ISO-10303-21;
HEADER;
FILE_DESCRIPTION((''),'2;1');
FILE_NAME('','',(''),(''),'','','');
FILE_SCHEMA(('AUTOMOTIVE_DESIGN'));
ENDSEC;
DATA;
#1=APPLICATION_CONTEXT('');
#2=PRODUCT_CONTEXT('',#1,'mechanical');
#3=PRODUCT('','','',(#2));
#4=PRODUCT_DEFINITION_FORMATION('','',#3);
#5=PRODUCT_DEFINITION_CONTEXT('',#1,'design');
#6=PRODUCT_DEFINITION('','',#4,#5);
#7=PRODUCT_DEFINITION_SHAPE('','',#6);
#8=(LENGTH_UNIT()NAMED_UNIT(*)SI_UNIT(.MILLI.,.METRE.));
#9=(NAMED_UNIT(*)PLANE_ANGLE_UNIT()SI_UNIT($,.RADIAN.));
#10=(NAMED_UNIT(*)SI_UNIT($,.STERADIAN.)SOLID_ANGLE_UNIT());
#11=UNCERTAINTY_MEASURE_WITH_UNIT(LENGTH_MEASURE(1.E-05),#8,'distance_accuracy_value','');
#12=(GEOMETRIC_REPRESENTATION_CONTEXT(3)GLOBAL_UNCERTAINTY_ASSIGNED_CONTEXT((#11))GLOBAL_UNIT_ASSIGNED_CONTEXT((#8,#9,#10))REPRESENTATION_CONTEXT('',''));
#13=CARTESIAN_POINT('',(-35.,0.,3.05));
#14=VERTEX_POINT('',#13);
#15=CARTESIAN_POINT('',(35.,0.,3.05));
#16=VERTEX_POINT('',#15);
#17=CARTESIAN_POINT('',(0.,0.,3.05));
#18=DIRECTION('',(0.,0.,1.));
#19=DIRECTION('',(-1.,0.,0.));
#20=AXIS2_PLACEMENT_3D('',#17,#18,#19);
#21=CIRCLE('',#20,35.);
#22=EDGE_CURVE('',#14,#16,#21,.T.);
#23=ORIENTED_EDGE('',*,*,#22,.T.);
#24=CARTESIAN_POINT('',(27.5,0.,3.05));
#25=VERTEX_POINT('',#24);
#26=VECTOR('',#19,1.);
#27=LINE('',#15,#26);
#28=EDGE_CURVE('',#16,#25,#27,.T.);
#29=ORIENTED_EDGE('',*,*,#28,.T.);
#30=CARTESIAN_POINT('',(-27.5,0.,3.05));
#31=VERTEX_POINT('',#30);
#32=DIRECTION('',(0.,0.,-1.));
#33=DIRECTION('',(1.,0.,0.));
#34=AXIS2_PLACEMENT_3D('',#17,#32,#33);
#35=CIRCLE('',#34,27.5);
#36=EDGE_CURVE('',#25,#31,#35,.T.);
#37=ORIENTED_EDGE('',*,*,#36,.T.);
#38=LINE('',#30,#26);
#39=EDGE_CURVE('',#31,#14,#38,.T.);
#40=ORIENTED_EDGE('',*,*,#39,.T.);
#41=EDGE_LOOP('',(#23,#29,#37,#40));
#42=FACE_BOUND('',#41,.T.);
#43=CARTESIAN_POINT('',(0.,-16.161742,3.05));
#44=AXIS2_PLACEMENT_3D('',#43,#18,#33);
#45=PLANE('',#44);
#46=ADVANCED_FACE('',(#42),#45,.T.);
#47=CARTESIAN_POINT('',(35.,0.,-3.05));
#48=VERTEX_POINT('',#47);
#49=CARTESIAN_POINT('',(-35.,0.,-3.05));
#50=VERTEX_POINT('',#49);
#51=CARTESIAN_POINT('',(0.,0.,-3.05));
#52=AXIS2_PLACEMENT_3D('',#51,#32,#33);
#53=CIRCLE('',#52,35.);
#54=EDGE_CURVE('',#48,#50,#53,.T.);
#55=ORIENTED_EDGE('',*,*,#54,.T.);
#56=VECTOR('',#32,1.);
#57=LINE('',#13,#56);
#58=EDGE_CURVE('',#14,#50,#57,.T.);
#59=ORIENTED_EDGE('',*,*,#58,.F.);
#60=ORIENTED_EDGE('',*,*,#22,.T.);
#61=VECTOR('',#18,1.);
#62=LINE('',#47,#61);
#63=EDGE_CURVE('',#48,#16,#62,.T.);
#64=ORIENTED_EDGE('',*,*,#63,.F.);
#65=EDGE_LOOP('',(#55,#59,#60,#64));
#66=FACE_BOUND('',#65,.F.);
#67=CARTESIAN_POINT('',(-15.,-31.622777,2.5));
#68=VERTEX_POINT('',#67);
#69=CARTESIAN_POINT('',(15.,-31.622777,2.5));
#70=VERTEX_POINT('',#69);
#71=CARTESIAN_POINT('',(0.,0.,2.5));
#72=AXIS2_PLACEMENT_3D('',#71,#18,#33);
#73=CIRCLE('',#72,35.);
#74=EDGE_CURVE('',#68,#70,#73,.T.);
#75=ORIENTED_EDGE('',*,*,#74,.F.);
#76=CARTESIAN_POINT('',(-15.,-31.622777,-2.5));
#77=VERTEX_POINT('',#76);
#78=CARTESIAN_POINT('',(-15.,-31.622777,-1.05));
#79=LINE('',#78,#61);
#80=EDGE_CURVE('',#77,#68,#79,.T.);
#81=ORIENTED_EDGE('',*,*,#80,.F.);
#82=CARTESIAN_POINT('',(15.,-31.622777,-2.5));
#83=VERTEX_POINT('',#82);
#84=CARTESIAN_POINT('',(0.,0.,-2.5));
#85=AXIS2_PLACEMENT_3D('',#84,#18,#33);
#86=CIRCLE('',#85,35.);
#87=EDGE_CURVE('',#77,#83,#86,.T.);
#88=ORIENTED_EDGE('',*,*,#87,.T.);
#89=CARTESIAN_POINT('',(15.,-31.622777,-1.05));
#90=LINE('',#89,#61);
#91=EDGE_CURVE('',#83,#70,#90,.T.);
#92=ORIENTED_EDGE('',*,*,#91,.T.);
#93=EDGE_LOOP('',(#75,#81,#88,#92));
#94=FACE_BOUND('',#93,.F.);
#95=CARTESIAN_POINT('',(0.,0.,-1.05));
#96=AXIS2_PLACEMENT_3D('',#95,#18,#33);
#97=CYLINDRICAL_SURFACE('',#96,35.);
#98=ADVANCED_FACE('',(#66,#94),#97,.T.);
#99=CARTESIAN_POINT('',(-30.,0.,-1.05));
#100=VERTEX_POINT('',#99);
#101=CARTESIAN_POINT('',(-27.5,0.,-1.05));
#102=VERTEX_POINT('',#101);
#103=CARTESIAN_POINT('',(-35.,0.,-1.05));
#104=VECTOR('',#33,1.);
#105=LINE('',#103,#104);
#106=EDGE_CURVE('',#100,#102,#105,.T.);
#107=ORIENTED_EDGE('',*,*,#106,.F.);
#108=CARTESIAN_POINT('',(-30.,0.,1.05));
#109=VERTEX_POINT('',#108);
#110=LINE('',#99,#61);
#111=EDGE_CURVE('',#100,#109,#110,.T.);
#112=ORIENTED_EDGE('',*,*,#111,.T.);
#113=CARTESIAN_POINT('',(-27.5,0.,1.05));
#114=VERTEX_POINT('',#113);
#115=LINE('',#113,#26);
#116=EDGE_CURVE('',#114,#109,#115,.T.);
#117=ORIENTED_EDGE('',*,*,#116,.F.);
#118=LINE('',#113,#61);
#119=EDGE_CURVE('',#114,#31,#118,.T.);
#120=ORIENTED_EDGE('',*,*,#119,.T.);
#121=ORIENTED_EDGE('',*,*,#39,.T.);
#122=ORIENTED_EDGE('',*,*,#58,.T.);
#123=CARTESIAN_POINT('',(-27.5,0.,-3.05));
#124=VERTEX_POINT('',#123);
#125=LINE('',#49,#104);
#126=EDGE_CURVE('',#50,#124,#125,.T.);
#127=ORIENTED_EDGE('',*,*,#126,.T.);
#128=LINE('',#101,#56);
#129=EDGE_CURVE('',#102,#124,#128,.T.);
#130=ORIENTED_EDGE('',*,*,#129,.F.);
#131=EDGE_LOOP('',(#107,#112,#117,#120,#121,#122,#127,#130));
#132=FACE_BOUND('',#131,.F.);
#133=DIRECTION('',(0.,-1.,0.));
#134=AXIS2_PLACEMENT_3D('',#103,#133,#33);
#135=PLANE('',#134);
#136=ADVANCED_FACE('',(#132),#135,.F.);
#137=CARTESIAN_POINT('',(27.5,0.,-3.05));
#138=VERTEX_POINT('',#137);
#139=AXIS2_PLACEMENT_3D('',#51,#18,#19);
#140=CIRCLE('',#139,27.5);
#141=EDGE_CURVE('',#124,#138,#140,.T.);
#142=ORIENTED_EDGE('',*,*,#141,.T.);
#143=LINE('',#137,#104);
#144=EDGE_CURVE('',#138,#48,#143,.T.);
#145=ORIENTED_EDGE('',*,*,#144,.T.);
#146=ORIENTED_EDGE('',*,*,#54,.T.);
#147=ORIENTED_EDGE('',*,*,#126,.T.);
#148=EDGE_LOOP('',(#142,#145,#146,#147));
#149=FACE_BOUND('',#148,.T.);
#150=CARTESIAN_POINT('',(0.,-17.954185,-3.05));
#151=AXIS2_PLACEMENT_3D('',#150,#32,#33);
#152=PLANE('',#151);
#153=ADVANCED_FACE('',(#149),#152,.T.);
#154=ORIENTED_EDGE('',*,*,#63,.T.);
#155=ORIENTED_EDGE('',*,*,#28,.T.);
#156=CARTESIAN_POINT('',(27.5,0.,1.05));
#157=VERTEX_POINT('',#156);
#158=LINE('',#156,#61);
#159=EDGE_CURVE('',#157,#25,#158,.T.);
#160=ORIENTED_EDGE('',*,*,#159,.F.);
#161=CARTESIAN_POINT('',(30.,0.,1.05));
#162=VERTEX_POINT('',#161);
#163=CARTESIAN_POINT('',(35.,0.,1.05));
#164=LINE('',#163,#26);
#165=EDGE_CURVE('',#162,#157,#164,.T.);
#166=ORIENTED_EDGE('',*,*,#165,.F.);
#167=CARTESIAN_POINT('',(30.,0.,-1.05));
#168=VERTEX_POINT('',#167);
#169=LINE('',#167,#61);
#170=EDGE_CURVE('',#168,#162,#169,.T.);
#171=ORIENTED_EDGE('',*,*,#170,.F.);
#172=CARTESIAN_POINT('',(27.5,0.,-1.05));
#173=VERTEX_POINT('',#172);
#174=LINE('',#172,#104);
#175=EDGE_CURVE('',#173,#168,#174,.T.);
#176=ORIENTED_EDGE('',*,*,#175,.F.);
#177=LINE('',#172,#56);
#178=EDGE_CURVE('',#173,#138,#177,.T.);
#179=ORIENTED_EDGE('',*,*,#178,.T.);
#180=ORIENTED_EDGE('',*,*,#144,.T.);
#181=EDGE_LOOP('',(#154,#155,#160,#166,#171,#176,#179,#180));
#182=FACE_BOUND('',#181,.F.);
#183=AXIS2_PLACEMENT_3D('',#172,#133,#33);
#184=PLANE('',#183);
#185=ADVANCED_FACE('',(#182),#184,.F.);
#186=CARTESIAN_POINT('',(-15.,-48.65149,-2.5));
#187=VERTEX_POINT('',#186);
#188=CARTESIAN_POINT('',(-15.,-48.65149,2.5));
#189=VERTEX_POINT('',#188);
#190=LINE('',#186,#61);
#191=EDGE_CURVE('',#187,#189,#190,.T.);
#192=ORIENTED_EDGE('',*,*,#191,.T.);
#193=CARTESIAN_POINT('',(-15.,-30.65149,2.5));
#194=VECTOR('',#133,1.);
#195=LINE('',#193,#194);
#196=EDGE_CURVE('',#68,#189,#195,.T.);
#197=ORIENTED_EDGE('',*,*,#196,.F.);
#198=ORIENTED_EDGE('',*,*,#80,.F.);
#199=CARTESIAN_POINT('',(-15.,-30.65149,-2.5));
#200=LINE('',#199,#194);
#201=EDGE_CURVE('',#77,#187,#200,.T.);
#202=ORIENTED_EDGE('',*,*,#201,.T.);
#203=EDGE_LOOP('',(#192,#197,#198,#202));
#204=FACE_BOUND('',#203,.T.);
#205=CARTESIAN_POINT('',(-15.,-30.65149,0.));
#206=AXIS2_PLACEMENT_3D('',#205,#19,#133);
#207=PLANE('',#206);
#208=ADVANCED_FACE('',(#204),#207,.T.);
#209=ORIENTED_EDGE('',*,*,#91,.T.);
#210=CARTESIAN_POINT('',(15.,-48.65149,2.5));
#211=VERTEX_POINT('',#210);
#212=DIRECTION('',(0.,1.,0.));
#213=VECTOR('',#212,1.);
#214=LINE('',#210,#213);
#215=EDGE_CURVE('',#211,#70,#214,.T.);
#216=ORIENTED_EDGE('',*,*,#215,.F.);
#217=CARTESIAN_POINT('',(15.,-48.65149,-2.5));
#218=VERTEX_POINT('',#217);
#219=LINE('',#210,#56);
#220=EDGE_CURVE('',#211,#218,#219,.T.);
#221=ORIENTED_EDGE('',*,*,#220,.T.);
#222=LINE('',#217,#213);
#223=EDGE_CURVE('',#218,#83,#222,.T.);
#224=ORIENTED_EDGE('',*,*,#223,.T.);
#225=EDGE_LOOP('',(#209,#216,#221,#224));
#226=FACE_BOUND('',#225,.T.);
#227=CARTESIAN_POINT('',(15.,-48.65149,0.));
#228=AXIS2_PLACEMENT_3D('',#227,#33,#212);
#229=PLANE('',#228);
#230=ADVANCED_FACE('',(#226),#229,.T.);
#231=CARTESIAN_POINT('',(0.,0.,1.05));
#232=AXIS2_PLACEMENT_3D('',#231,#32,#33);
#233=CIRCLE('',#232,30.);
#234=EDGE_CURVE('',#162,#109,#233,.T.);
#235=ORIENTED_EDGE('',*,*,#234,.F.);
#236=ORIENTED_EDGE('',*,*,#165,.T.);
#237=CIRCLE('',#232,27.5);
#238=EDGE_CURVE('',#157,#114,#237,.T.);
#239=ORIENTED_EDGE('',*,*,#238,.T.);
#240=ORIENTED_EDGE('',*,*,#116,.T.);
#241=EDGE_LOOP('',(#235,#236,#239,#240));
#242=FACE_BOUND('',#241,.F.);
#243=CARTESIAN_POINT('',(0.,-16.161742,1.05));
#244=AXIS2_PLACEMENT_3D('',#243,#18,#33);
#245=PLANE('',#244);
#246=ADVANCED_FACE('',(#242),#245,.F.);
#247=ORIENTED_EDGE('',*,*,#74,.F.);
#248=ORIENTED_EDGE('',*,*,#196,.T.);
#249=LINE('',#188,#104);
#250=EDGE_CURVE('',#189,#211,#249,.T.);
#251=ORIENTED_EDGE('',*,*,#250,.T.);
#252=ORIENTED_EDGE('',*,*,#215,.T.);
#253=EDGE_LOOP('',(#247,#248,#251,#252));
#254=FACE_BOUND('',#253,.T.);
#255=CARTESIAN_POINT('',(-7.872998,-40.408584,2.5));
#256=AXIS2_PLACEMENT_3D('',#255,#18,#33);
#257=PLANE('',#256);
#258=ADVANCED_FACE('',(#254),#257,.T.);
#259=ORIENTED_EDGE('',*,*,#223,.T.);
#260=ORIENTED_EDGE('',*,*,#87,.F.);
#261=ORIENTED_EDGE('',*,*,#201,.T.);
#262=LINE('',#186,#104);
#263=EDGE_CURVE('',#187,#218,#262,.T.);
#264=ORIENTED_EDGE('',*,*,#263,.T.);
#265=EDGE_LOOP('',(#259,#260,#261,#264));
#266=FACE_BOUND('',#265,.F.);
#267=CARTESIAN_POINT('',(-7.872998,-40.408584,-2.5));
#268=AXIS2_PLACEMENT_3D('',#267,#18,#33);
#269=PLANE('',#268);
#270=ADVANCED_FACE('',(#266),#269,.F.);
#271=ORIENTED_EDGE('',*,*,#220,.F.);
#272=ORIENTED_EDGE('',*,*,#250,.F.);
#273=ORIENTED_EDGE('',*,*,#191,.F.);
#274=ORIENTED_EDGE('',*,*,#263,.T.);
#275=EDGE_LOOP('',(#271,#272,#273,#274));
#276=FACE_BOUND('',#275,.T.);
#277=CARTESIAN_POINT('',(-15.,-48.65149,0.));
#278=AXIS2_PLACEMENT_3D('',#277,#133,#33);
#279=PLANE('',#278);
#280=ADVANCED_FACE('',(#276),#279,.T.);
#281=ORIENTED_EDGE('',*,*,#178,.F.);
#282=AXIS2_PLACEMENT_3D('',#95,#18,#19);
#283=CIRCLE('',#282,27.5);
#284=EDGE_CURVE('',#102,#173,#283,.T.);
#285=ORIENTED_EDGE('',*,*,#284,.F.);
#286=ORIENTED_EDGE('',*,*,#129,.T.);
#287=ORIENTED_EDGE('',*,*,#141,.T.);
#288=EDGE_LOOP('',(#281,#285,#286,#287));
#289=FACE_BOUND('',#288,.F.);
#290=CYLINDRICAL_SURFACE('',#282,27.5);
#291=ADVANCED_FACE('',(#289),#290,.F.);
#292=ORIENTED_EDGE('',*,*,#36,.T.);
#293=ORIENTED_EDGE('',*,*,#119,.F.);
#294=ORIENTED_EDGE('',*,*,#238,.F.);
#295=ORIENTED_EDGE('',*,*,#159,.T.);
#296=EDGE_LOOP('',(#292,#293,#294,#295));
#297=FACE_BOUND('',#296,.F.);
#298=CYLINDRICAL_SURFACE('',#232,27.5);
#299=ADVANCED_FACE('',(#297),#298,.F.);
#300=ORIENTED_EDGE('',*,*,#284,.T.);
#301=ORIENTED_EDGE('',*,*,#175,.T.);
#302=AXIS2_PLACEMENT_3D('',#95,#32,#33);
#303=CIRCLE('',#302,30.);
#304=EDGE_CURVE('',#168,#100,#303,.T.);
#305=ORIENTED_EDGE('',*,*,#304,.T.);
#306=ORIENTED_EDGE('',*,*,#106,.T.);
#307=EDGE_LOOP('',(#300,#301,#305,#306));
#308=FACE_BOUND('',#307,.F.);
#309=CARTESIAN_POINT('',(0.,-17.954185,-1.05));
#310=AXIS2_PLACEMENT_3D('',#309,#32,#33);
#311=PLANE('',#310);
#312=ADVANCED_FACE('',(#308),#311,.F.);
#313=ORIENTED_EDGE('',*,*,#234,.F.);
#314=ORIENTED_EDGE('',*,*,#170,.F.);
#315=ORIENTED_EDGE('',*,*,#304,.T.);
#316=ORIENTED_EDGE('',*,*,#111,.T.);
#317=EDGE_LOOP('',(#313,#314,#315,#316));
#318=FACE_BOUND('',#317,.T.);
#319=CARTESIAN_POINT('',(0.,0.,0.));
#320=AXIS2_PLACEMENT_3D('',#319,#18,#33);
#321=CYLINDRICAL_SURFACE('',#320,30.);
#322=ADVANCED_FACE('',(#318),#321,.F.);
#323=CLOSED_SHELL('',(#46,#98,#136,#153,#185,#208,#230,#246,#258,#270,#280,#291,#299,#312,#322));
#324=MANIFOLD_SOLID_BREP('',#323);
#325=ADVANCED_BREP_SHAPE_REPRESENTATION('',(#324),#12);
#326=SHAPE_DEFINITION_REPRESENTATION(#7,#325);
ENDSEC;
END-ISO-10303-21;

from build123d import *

# Parameters (mm, degrees)
F1_DEPTH = 1.05
F3_DEPTH = 2
F5_DEPTH = 2
F7_DEPTH = 2.5


with BuildPart() as f1:
    # F0 (on Top) → F1 (new body, symmetric)
    with BuildSketch(Plane.XY):
        with BuildLine():
            Line((35, 0), (30, 0))
            ThreePointArc((30, 0), (0, -30), (-30, 0))
            Line((-30, 0), (-35, 0))
            ThreePointArc((-35, 0), (0, -35), (35, 0))
        make_face()
    extrude(amount=F1_DEPTH, both=True)

    # F2 (on face) → F3 (join)
    with BuildSketch(Plane.XY.offset(1.05)):
        with BuildLine():
            ThreePointArc((-30, 0), (0, -30), (30, 0))
            Line((30, 0), (27.5, 0))
            ThreePointArc((27.5, 0), (0, -27.5), (-27.5, 0))
            Line((-27.5, 0), (-30, 0))
        make_face()
        with BuildLine():
            ThreePointArc((-35, 0), (0, -35), (35, 0))
            Line((35, 0), (30, 0))
            ThreePointArc((30, 0), (0, -30), (-30, 0))
            Line((-30, 0), (-35, 0))
        make_face()
    extrude(amount=F3_DEPTH)

    # F4 (on face) → F5 (join)
    with BuildSketch(Plane(origin=(0, 0, -1.05), x_dir=(1, 0, 0), z_dir=(0, 0, -1))):
        with BuildLine():
            Line((30, 0), (35, 0))
            ThreePointArc((35, 0), (0, 35), (-35, 0))
            Line((-35, 0), (-30, 0))
            ThreePointArc((-30, 0), (0, 30), (30, 0))
        make_face()
        with BuildLine():
            Line((27.5, 0), (30, 0))
            ThreePointArc((30, 0), (0, 30), (-30, 0))
            Line((-30, 0), (-27.5, 0))
            ThreePointArc((-27.5, 0), (0, 27.5), (27.5, 0))
        make_face()
    extrude(amount=F5_DEPTH)

    # F6 (on Top) → F7 (join, symmetric)
    with BuildSketch(Plane.XY):
        with BuildLine():
            Line((0, -48.6514897645), (0, -33.6514897645))
            ThreePointArc((0, -33.6514897645), (-7.624504365, -32.7740115893), (-15, -30.6514897645))
            Line((-15, -30.6514897645), (-15, -48.6514897645))
            Line((-15, -48.6514897645), (0, -48.6514897645))
        make_face()
        with BuildLine():
            ThreePointArc((15, -30.6514897645), (7.624504365, -32.7740115893), (0, -33.6514897645))
            Line((0, -33.6514897645), (0, -48.6514897645))
            Line((0, -48.6514897645), (15, -48.6514897645))
            Line((15, -48.6514897645), (15, -30.6514897645))
        make_face()
    extrude(amount=F7_DEPTH, both=True)


solid = f1.part
